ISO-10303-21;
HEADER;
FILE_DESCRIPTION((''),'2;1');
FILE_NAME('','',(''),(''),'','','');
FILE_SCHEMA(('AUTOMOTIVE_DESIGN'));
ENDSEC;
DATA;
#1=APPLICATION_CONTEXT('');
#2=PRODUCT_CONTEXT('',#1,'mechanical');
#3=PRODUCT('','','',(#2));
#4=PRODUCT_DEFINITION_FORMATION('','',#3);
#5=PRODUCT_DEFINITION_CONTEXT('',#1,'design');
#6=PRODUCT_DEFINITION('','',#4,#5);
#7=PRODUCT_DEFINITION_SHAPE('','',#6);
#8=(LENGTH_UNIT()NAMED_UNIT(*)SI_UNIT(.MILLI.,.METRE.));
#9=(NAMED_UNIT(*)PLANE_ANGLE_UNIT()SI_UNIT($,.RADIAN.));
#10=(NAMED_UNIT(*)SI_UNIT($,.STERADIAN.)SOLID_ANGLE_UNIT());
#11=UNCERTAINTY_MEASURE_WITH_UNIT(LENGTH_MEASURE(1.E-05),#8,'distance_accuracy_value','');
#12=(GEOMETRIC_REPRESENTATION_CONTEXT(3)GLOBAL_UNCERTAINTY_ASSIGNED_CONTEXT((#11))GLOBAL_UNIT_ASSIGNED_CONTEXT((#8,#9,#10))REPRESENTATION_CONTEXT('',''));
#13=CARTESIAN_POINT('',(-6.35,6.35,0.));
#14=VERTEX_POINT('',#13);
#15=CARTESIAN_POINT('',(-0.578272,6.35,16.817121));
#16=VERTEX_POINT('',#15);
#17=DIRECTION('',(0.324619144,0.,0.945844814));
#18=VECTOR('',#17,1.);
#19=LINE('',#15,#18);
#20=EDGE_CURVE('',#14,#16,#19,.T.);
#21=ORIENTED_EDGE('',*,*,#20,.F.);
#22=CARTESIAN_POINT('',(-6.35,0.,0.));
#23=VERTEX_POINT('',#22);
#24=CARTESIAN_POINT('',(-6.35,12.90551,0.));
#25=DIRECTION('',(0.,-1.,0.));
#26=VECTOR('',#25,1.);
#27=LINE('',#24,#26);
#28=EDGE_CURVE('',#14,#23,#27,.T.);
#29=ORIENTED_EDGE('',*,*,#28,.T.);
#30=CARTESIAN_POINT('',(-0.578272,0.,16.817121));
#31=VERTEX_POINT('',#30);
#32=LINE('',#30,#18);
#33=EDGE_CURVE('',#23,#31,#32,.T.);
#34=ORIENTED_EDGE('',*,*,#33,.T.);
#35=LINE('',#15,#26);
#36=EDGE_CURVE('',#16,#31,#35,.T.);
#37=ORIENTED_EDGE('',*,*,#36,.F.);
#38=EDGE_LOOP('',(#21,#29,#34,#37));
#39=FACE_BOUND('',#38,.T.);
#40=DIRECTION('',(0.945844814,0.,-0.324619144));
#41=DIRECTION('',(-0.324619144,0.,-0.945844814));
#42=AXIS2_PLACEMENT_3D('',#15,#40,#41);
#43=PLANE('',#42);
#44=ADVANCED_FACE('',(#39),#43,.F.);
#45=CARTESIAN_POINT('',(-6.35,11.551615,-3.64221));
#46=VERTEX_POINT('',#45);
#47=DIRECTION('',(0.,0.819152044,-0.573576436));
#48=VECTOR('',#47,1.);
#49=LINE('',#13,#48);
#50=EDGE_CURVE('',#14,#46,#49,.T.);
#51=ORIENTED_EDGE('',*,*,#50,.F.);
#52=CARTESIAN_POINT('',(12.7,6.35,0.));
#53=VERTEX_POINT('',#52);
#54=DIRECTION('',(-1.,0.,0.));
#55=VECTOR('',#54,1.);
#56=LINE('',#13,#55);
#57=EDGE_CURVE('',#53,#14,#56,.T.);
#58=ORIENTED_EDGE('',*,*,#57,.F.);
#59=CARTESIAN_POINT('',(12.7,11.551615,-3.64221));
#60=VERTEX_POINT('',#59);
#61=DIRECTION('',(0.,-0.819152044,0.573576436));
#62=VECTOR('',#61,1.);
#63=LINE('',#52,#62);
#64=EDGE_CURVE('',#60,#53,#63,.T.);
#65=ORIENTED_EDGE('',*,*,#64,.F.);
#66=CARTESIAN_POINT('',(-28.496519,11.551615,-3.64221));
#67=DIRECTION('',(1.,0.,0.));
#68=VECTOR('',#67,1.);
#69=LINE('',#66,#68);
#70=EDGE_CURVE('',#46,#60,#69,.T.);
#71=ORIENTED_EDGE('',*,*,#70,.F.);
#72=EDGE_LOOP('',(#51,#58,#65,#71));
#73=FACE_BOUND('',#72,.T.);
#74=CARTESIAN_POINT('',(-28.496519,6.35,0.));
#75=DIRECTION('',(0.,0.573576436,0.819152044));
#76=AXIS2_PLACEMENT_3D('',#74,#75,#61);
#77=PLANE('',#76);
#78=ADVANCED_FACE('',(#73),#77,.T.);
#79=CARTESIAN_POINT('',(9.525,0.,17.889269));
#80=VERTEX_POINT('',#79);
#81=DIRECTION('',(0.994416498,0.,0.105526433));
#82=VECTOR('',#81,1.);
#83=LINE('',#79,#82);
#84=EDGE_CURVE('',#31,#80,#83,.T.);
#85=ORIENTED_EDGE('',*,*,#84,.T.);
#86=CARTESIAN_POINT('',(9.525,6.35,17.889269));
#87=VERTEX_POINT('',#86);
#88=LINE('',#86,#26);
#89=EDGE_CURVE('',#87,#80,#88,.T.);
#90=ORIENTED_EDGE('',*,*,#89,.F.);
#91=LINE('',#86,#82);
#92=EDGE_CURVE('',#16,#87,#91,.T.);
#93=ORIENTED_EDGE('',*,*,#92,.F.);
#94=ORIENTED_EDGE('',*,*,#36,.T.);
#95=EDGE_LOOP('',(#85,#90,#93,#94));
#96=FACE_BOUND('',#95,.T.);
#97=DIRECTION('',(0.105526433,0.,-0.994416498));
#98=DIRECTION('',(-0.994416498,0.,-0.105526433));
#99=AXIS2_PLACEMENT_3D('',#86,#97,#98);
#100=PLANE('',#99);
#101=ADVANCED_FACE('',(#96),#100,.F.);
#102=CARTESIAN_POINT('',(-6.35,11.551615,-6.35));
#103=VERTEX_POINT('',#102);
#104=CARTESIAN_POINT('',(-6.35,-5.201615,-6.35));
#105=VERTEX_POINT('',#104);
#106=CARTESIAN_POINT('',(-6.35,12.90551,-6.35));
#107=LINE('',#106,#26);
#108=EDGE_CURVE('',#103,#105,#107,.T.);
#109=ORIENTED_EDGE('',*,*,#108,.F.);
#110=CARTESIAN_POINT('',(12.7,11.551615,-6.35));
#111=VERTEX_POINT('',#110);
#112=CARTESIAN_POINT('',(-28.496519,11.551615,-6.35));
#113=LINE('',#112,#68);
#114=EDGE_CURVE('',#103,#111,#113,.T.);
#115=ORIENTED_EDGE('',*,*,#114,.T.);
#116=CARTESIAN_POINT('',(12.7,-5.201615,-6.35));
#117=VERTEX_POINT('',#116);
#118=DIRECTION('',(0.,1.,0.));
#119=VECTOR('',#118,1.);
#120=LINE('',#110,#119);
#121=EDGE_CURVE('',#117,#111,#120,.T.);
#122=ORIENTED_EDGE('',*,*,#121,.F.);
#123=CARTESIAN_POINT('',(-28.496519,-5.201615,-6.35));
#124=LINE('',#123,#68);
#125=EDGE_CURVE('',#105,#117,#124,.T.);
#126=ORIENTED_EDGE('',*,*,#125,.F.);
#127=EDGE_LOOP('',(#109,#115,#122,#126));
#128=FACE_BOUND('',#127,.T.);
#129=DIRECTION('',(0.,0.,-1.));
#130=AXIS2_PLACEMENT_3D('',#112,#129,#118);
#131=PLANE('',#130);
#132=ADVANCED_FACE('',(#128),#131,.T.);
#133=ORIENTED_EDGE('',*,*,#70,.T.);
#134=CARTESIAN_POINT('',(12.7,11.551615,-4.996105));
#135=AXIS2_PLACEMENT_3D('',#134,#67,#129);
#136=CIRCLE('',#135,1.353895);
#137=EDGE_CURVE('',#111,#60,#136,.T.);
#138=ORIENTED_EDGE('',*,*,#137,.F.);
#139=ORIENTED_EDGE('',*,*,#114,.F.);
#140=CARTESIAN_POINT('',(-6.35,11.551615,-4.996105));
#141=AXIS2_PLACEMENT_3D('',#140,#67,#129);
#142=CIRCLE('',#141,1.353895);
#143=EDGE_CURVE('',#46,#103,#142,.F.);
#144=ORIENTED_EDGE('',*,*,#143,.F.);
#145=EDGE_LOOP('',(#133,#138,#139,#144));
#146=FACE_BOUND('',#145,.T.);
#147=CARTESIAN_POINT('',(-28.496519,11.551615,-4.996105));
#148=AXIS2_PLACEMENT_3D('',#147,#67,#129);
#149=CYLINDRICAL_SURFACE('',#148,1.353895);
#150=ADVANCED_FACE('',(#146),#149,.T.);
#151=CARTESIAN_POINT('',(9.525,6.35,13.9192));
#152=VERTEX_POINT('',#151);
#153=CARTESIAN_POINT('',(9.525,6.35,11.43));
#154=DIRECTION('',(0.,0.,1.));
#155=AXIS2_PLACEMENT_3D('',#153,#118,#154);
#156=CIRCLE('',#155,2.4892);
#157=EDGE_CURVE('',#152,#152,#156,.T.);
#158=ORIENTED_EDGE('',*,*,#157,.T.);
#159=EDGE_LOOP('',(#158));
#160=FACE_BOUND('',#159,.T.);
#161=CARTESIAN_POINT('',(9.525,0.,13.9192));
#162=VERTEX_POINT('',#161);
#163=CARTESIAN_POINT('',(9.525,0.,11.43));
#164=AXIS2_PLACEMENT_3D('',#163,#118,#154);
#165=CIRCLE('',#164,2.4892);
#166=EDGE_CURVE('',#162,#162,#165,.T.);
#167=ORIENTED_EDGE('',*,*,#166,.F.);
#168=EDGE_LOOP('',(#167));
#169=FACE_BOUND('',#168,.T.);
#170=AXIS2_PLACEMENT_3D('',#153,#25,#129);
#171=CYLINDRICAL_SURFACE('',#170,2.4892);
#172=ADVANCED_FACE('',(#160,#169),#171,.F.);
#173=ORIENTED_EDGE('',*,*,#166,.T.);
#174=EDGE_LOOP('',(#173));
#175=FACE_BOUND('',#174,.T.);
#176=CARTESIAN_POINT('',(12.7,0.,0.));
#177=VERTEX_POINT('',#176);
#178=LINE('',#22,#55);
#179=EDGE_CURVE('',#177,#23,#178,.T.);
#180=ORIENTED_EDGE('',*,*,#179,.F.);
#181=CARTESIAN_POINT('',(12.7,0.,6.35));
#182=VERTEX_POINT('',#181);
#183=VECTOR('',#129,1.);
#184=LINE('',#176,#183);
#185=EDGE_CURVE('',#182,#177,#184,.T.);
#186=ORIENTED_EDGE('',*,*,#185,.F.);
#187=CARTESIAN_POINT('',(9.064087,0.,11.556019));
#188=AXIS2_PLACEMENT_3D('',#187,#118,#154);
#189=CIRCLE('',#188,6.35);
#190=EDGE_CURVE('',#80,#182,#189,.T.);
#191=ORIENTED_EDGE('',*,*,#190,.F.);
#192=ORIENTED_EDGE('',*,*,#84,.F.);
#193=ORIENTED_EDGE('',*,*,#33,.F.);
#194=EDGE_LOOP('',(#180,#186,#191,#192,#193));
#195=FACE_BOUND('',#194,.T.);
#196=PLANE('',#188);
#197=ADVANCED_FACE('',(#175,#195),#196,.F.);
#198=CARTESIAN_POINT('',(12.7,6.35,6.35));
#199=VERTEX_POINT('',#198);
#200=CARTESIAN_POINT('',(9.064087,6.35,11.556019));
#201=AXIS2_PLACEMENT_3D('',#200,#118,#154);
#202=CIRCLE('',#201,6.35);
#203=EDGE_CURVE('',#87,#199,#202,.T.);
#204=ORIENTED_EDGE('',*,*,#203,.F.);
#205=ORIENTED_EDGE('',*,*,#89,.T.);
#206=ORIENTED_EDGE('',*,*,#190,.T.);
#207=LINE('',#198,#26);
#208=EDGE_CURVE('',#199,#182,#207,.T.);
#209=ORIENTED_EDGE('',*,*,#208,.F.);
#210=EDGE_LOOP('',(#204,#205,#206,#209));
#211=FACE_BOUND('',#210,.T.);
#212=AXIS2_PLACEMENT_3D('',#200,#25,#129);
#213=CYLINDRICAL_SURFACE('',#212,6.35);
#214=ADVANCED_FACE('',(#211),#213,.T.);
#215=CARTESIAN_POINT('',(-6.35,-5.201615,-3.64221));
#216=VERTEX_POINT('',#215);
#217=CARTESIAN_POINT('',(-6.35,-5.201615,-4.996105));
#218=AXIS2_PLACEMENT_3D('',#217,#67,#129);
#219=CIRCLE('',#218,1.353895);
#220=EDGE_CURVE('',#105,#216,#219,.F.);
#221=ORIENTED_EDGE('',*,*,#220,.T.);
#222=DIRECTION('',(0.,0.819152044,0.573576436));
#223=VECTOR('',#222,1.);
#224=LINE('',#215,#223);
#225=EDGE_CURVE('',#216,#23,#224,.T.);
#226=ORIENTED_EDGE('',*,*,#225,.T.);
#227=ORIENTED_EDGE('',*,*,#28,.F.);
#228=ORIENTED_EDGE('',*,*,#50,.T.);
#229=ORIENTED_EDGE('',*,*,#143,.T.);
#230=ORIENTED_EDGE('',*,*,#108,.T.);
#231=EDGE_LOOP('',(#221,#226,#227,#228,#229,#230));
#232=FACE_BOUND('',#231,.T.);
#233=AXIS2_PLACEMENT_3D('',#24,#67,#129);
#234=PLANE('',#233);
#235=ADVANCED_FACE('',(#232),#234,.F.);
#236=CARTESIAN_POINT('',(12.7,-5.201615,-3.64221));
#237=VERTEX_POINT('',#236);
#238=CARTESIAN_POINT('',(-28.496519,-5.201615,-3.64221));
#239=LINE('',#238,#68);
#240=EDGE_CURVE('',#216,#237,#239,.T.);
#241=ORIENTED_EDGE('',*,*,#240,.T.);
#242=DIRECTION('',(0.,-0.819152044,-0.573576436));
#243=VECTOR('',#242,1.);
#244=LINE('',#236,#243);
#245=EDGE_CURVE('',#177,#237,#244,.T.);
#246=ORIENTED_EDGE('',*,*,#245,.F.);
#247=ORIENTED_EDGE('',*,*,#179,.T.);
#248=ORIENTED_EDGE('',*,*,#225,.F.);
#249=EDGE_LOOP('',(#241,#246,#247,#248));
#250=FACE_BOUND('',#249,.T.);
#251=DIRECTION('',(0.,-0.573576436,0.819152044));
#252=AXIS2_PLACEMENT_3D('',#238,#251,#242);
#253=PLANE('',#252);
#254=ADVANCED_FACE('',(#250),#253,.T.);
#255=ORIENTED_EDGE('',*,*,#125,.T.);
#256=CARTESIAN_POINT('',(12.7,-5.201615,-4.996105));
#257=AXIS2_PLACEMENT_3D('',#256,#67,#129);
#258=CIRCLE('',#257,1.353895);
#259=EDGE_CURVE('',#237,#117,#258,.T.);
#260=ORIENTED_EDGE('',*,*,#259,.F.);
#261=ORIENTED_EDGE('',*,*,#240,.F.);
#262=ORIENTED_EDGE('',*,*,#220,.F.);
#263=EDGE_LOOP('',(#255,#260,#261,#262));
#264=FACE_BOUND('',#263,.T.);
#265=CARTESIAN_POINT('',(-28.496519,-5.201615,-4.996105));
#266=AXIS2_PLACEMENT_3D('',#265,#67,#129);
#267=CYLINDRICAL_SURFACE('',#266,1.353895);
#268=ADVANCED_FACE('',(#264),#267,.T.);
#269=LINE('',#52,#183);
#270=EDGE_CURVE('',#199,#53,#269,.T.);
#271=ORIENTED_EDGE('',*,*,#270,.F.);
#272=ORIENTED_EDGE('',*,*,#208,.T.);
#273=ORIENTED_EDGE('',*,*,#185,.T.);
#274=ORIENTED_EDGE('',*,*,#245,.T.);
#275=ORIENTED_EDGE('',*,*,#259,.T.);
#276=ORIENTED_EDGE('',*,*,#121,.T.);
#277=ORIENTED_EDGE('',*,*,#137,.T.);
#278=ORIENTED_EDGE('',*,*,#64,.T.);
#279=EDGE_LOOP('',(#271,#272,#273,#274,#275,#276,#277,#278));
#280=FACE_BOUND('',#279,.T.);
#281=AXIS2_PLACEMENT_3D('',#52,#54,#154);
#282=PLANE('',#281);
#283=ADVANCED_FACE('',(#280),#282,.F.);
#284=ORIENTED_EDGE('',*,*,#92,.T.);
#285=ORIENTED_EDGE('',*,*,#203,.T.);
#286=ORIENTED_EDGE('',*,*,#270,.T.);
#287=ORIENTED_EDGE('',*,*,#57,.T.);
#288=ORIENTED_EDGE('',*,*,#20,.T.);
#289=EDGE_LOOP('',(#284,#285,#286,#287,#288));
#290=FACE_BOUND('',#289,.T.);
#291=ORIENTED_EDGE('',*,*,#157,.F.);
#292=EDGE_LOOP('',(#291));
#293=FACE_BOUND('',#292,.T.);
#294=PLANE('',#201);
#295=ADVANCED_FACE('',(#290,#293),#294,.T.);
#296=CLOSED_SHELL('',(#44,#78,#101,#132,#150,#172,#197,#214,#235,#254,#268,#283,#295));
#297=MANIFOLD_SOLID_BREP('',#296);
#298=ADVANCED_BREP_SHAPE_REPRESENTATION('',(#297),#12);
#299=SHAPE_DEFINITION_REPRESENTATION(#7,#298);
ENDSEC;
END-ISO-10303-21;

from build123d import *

# Parameters (mm, degrees)
SKETCH1_R               = 2.4892
BOSS_EXTRUDE1_DEPTH     = 6.35
BOSS_EXTRUDE2_START     = -6.35
BOSS_EXTRUDE2_DEPTH     = 19.05
BOSS_EXTRUDE2_START_2   = -6.555460136
BOSS_EXTRUDE2_2_DEPTH   = 19.460920272
BOSS_EXTRUDE2_START_3   = -10
BOSS_EXTRUDE2_3_DEPTH   = 3.65
CUT_EXTRUDE1_DEPTH      = 27.910448217
CUT_EXTRUDE1_DEPTH_BACK = 27.910448217
SKETCH3_W               = 2.179354936
SKETCH3_H               = 6.35


with BuildPart() as part:
    # Sketch1 → Boss-Extrude1 (new body)
    with BuildSketch(Plane(origin=(0, 0, 0), x_dir=(1, 0, 0), z_dir=(0, 1, 0))):
        with BuildLine():
            Line((9.525, -17.889269346), (-0.578271622, -16.817120786))
            Line((-0.578271622, -16.817120786), (-6.35, 0))
            Line((-6.35, 0), (12.7, 0))
            Line((12.7, 0), (12.7, -6.35))
            ThreePointArc((12.7, -6.35), (15.186560179, -13.240601753), (9.525, -17.889269346))
        make_face()
        with Locations(Location((9.525, -11.43, 0), (0, 0, 270))):
            Circle(SKETCH1_R, mode=Mode.SUBTRACT)
    extrude(amount=BOSS_EXTRUDE1_DEPTH)

    # Boss-Extrude2: read off the stored shape, not the designer's step
    # Boss-Extrude2 outline → Boss-Extrude2 (add)
    with BuildSketch(Plane.YZ.offset(BOSS_EXTRUDE2_START)):
        with BuildLine():
            ThreePointArc((11.551615481, -6.35), (12.905510296, -4.996105185), (11.551615481, -3.642210371))
            Line((11.551615481, -3.642210371), (6.35, 0))
            Line((6.35, 0), (0, 0))
            Line((0, 0), (-5.201615481, -3.642210371))
            ThreePointArc((-5.201615481, -3.642210371), (-6.555510296, -4.996105185), (-5.201615481, -6.35))
            Line((-5.201615481, -6.35), (11.551615481, -6.35))
        make_face()
    extrude(amount=BOSS_EXTRUDE2_DEPTH)

    # Boss-Extrude2 2 outline → Boss-Extrude2 2 (add)
    with BuildSketch(Plane(origin=(0, 0, 0), x_dir=(1, 0, 0), z_dir=(0, 1, 0)).offset(BOSS_EXTRUDE2_START_2)):
        Polygon((-8.529354936, 6.35), (-6.35, 0), (-6.35, 6.35), align=None)
    extrude(amount=BOSS_EXTRUDE2_2_DEPTH)

    # Boss-Extrude2 3 outline → Boss-Extrude2 3 (cut)
    with BuildSketch(Plane.YZ.offset(BOSS_EXTRUDE2_START_3)):
        with BuildLine():
            Line((12.905460136, 0), (6.35, 0))
            Line((6.35, 0), (11.551615481, -3.642210371))
            ThreePointArc((11.551615481, -3.642210371), (12.504834401, -4.034645431), (12.905460136, -4.984450993))
            Line((12.905460136, -4.984450993), (12.905460136, 0))
        make_face()
        with BuildLine():
            ThreePointArc((12.905460136, -5.007759378), (12.504834401, -5.95756494), (11.551615481, -6.35))
            Line((11.551615481, -6.35), (12.905460136, -6.35))
            Line((12.905460136, -6.35), (12.905460136, -5.007759378))
        make_face()
        with BuildLine():
            Line((0, 0), (-6.555460136, 0))
            Line((-6.555460136, 0), (-6.555460136, -4.984450993))
            ThreePointArc((-6.555460136, -4.984450993), (-6.154834401, -4.034645431), (-5.201615481, -3.642210371))
            Line((-5.201615481, -3.642210371), (0, 0))
        make_face()
        with BuildLine():
            ThreePointArc((-5.201615481, -6.35), (-6.154834401, -5.95756494), (-6.555460136, -5.007759378))
            Line((-6.555460136, -5.007759378), (-6.555460136, -6.35))
            Line((-6.555460136, -6.35), (-5.201615481, -6.35))
        make_face()
    extrude(amount=BOSS_EXTRUDE2_3_DEPTH, mode=Mode.SUBTRACT)

    # Sketch3 → Cut-Extrude1 (cut, two sides: drawn at the far end of the back side and taken through both)
    with BuildSketch(Plane.XZ.offset(-CUT_EXTRUDE1_DEPTH_BACK)):
        with Locations((-7.439677468, -3.175)):
            Rectangle(SKETCH3_W, SKETCH3_H)
    extrude(amount=CUT_EXTRUDE1_DEPTH + CUT_EXTRUDE1_DEPTH_BACK, mode=Mode.SUBTRACT)


solid = part.part
